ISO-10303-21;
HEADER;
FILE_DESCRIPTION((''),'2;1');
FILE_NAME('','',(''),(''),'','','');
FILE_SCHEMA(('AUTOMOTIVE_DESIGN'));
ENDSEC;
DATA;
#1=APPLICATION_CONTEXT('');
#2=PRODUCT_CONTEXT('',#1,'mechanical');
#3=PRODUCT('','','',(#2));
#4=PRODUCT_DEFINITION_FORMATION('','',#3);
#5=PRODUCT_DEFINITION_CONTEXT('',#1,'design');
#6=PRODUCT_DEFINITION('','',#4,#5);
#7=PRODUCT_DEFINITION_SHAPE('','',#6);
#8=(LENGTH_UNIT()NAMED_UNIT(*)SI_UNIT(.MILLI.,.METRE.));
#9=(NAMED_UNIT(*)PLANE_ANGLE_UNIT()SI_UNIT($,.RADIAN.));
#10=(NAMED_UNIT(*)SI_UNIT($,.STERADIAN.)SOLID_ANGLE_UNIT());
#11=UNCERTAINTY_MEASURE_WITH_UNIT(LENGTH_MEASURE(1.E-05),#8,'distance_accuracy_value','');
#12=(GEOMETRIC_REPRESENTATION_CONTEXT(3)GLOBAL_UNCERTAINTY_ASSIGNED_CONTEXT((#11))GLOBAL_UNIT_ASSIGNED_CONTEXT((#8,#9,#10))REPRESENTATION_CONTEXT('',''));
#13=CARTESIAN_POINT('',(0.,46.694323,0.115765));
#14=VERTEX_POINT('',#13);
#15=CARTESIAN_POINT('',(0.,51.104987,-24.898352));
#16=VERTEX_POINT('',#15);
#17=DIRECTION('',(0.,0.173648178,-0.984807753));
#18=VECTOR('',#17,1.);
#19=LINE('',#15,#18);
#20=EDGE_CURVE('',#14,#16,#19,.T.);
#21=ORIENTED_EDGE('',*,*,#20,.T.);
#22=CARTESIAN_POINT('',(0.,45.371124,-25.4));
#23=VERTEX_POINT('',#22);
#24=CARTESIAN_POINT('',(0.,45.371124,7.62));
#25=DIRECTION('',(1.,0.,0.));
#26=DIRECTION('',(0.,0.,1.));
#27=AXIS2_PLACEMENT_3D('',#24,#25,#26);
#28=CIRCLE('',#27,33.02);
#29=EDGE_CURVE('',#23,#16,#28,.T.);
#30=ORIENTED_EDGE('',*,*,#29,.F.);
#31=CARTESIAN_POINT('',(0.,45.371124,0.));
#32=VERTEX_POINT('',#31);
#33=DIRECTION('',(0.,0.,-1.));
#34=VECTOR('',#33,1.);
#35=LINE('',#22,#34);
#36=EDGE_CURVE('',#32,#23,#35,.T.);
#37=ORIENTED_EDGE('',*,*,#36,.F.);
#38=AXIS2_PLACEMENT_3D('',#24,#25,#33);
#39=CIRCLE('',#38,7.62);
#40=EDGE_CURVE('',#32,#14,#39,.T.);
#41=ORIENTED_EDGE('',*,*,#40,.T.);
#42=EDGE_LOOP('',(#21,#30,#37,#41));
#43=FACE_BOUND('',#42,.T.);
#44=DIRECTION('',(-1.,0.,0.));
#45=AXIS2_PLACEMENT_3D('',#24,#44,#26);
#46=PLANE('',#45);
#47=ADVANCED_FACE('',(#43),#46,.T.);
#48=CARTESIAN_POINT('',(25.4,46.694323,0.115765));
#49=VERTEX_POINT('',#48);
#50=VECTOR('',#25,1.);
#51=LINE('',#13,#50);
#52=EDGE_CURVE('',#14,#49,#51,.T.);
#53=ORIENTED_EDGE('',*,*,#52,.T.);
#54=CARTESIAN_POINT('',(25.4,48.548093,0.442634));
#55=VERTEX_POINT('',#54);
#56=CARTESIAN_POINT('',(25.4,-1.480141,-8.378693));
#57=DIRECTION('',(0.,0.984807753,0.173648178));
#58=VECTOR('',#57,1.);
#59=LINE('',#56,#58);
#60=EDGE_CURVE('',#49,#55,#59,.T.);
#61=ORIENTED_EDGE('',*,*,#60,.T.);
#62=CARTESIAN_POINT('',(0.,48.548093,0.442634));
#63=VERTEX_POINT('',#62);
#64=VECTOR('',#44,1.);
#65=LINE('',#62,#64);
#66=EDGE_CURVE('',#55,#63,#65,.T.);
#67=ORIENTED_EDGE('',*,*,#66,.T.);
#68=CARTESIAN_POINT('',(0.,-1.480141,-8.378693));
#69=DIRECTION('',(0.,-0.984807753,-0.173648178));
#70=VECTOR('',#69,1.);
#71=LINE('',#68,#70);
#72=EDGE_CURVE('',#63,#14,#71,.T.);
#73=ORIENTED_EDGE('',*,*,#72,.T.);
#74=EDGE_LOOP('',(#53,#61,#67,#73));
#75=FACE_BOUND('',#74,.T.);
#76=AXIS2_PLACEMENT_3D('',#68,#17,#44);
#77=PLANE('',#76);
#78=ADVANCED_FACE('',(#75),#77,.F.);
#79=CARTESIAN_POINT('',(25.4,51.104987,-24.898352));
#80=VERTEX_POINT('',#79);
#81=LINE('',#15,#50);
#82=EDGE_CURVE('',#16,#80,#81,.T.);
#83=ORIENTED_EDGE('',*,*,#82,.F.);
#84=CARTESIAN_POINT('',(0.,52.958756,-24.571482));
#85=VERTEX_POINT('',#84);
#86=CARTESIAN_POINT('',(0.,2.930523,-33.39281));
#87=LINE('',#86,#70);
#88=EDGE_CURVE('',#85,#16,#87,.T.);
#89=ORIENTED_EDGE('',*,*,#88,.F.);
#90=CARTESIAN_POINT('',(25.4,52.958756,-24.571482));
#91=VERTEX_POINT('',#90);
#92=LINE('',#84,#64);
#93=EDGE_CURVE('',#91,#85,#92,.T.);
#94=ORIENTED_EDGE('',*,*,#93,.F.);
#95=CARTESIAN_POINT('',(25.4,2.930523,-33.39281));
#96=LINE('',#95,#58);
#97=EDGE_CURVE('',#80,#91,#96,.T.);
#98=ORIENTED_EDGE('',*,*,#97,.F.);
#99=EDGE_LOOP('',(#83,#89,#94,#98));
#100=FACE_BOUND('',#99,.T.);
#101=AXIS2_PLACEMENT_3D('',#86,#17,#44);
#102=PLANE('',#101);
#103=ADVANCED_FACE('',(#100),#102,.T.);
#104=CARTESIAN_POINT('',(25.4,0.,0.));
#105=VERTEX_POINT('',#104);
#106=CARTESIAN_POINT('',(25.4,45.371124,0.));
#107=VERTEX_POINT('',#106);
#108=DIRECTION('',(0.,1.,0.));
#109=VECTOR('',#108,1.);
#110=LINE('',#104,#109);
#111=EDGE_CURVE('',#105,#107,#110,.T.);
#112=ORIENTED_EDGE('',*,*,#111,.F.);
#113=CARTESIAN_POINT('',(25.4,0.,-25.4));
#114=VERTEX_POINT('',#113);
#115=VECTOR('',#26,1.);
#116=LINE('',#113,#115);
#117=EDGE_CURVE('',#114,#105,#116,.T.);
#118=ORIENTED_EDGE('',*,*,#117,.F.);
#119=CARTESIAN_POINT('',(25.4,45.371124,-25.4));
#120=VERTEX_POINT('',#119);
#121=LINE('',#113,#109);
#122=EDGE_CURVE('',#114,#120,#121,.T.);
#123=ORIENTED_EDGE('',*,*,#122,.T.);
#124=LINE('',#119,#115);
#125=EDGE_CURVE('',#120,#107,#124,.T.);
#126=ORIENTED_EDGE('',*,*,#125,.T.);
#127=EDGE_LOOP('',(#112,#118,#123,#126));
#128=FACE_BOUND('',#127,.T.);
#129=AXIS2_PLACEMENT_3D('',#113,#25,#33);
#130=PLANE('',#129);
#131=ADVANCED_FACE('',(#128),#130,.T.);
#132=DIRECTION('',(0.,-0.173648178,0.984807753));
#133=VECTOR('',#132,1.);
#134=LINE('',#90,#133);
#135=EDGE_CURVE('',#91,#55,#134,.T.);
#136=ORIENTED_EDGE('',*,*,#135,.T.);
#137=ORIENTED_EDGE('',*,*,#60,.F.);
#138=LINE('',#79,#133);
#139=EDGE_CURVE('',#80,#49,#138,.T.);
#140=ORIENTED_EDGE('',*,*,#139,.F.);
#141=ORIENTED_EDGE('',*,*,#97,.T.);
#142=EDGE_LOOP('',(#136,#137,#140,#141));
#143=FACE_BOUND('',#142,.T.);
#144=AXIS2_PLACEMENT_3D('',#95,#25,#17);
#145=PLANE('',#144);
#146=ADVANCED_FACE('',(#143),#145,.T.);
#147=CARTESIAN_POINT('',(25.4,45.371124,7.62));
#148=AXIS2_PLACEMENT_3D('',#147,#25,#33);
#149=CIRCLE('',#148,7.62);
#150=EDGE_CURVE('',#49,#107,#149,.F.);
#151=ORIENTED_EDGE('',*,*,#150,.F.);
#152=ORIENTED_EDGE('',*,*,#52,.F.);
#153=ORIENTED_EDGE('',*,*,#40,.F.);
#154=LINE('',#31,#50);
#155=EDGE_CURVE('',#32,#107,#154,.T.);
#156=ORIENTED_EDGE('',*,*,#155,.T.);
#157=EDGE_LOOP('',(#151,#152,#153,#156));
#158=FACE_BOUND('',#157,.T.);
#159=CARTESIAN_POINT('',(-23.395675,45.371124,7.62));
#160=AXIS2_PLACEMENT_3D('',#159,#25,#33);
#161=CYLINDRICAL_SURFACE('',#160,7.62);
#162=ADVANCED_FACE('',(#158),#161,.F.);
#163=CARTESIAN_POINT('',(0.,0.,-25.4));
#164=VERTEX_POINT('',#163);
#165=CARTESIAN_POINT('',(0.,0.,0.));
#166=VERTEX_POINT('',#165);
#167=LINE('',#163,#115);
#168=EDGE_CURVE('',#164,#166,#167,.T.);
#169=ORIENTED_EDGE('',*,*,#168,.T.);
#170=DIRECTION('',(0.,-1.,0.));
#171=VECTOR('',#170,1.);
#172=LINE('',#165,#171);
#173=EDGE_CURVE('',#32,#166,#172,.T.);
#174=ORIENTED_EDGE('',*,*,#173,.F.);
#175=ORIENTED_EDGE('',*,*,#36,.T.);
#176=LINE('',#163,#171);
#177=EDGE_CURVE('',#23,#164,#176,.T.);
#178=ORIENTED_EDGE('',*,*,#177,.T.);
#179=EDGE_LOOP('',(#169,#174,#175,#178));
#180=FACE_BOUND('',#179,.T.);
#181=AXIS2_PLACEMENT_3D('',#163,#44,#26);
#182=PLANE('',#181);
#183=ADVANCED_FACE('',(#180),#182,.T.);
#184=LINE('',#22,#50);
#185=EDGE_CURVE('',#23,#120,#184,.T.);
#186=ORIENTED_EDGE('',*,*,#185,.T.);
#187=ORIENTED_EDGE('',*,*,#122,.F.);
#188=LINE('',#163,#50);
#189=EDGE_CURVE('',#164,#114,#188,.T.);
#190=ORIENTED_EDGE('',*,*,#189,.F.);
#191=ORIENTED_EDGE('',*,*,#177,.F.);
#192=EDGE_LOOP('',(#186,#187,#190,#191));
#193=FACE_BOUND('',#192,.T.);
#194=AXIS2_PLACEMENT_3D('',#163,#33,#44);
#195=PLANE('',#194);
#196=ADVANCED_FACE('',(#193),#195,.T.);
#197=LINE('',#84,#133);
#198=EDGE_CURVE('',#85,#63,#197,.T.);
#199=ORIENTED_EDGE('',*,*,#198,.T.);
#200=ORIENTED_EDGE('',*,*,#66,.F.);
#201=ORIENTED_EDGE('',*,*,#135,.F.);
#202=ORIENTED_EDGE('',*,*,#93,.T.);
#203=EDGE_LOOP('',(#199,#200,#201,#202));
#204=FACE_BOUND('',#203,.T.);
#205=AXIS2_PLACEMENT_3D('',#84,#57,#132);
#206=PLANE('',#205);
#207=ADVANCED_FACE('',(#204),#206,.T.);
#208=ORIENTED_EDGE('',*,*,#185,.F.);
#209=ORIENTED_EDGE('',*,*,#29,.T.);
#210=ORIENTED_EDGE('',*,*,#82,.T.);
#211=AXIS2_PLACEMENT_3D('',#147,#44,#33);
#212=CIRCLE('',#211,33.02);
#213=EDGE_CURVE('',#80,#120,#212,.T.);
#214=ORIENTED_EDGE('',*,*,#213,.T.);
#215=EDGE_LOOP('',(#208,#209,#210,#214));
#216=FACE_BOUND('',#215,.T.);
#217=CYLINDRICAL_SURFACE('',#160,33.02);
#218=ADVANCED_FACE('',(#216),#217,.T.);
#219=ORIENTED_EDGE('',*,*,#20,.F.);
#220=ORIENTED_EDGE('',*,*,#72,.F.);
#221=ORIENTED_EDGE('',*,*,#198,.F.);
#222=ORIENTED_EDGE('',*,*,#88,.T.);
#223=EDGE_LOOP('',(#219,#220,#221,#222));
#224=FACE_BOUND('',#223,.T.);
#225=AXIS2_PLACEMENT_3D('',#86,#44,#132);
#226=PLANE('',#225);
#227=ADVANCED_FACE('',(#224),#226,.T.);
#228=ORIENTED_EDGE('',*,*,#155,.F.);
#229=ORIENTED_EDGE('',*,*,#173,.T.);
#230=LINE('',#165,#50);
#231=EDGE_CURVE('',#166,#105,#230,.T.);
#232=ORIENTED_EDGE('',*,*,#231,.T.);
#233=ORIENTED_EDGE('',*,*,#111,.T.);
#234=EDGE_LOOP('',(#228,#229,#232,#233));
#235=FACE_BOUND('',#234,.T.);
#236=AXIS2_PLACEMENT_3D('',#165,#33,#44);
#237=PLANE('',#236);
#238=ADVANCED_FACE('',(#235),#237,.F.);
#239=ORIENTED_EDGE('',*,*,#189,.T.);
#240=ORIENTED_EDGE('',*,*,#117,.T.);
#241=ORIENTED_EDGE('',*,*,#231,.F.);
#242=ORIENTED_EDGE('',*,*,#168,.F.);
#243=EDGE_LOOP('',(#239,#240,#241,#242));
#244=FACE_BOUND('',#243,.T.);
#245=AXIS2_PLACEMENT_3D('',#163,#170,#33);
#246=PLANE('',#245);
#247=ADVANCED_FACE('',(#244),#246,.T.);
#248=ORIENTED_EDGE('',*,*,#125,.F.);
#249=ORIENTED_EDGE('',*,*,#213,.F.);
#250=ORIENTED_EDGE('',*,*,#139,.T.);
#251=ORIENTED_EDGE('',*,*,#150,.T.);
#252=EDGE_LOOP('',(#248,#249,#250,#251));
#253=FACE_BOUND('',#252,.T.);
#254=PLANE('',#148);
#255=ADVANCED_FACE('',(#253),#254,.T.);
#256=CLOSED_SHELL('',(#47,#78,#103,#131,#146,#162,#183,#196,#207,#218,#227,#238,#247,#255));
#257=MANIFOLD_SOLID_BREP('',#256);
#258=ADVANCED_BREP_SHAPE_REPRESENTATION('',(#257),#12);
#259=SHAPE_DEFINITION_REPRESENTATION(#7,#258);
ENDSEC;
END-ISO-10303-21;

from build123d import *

# Parameters (mm, degrees)
SKETCH1_W              = 25.4
SKETCH1_H              = 50.8
BASE_FLANGE1_DEPTH     = 25.4
SKETCHED_BEND2_DEPTH   = 25.4
SKETCHED_BEND2_2_DEPTH = 25.4


# Read off the part's stored shape, not the designer's step: Sketched Bend2
# Sheet-metal steps are written as plain solids
with BuildPart() as part:
    # Sketch1 → Base-Flange1 (new body)
    with BuildSketch(Plane.XY):
        with Locations((12.7, 25.4)):
            Rectangle(SKETCH1_W, SKETCH1_H)
    extrude(amount=-BASE_FLANGE1_DEPTH)

    # Sketched Bend2 outline → Sketched Bend2 (cut)
    with BuildSketch(Plane.YZ):
        with BuildLine():
            Line((50.8, -25.4), (50.8, -24.950657177))
            ThreePointArc((50.8, -24.950657177), (48.094844213, -25.287472556), (45.37112433, -25.4))
            Line((45.37112433, -25.4), (50.8, -25.4))
        make_face()
        Polygon((50.8, 0), (48.626141092, 0), (50.8, -12.328566501), align=None)
    extrude(amount=SKETCHED_BEND2_DEPTH, mode=Mode.SUBTRACT)

    # Sketched Bend2 2 outline → Sketched Bend2 2 (add)
    with BuildSketch(Plane.YZ):
        with BuildLine():
            Line((52.958756408, -24.57148247), (50.8, -12.328566501))
            Line((50.8, -12.328566501), (50.8, -24.950657177))
            ThreePointArc((50.8, -24.950657177), (50.95255485, -24.924861858), (51.104987157, -24.898352004))
            Line((51.104987157, -24.898352004), (52.958756408, -24.57148247))
        make_face()
        with BuildLine():
            Line((48.548092695, 0.442634457), (46.694323444, 0.115764922))
            ThreePointArc((46.694323444, 0.115764922), (46.03525109, 0.028996401), (45.37112433, 0))
            Line((45.37112433, 0), (48.626141092, 0))
            Line((48.626141092, 0), (48.548092695, 0.442634457))
        make_face()
    extrude(amount=SKETCHED_BEND2_2_DEPTH)


solid = part.part
